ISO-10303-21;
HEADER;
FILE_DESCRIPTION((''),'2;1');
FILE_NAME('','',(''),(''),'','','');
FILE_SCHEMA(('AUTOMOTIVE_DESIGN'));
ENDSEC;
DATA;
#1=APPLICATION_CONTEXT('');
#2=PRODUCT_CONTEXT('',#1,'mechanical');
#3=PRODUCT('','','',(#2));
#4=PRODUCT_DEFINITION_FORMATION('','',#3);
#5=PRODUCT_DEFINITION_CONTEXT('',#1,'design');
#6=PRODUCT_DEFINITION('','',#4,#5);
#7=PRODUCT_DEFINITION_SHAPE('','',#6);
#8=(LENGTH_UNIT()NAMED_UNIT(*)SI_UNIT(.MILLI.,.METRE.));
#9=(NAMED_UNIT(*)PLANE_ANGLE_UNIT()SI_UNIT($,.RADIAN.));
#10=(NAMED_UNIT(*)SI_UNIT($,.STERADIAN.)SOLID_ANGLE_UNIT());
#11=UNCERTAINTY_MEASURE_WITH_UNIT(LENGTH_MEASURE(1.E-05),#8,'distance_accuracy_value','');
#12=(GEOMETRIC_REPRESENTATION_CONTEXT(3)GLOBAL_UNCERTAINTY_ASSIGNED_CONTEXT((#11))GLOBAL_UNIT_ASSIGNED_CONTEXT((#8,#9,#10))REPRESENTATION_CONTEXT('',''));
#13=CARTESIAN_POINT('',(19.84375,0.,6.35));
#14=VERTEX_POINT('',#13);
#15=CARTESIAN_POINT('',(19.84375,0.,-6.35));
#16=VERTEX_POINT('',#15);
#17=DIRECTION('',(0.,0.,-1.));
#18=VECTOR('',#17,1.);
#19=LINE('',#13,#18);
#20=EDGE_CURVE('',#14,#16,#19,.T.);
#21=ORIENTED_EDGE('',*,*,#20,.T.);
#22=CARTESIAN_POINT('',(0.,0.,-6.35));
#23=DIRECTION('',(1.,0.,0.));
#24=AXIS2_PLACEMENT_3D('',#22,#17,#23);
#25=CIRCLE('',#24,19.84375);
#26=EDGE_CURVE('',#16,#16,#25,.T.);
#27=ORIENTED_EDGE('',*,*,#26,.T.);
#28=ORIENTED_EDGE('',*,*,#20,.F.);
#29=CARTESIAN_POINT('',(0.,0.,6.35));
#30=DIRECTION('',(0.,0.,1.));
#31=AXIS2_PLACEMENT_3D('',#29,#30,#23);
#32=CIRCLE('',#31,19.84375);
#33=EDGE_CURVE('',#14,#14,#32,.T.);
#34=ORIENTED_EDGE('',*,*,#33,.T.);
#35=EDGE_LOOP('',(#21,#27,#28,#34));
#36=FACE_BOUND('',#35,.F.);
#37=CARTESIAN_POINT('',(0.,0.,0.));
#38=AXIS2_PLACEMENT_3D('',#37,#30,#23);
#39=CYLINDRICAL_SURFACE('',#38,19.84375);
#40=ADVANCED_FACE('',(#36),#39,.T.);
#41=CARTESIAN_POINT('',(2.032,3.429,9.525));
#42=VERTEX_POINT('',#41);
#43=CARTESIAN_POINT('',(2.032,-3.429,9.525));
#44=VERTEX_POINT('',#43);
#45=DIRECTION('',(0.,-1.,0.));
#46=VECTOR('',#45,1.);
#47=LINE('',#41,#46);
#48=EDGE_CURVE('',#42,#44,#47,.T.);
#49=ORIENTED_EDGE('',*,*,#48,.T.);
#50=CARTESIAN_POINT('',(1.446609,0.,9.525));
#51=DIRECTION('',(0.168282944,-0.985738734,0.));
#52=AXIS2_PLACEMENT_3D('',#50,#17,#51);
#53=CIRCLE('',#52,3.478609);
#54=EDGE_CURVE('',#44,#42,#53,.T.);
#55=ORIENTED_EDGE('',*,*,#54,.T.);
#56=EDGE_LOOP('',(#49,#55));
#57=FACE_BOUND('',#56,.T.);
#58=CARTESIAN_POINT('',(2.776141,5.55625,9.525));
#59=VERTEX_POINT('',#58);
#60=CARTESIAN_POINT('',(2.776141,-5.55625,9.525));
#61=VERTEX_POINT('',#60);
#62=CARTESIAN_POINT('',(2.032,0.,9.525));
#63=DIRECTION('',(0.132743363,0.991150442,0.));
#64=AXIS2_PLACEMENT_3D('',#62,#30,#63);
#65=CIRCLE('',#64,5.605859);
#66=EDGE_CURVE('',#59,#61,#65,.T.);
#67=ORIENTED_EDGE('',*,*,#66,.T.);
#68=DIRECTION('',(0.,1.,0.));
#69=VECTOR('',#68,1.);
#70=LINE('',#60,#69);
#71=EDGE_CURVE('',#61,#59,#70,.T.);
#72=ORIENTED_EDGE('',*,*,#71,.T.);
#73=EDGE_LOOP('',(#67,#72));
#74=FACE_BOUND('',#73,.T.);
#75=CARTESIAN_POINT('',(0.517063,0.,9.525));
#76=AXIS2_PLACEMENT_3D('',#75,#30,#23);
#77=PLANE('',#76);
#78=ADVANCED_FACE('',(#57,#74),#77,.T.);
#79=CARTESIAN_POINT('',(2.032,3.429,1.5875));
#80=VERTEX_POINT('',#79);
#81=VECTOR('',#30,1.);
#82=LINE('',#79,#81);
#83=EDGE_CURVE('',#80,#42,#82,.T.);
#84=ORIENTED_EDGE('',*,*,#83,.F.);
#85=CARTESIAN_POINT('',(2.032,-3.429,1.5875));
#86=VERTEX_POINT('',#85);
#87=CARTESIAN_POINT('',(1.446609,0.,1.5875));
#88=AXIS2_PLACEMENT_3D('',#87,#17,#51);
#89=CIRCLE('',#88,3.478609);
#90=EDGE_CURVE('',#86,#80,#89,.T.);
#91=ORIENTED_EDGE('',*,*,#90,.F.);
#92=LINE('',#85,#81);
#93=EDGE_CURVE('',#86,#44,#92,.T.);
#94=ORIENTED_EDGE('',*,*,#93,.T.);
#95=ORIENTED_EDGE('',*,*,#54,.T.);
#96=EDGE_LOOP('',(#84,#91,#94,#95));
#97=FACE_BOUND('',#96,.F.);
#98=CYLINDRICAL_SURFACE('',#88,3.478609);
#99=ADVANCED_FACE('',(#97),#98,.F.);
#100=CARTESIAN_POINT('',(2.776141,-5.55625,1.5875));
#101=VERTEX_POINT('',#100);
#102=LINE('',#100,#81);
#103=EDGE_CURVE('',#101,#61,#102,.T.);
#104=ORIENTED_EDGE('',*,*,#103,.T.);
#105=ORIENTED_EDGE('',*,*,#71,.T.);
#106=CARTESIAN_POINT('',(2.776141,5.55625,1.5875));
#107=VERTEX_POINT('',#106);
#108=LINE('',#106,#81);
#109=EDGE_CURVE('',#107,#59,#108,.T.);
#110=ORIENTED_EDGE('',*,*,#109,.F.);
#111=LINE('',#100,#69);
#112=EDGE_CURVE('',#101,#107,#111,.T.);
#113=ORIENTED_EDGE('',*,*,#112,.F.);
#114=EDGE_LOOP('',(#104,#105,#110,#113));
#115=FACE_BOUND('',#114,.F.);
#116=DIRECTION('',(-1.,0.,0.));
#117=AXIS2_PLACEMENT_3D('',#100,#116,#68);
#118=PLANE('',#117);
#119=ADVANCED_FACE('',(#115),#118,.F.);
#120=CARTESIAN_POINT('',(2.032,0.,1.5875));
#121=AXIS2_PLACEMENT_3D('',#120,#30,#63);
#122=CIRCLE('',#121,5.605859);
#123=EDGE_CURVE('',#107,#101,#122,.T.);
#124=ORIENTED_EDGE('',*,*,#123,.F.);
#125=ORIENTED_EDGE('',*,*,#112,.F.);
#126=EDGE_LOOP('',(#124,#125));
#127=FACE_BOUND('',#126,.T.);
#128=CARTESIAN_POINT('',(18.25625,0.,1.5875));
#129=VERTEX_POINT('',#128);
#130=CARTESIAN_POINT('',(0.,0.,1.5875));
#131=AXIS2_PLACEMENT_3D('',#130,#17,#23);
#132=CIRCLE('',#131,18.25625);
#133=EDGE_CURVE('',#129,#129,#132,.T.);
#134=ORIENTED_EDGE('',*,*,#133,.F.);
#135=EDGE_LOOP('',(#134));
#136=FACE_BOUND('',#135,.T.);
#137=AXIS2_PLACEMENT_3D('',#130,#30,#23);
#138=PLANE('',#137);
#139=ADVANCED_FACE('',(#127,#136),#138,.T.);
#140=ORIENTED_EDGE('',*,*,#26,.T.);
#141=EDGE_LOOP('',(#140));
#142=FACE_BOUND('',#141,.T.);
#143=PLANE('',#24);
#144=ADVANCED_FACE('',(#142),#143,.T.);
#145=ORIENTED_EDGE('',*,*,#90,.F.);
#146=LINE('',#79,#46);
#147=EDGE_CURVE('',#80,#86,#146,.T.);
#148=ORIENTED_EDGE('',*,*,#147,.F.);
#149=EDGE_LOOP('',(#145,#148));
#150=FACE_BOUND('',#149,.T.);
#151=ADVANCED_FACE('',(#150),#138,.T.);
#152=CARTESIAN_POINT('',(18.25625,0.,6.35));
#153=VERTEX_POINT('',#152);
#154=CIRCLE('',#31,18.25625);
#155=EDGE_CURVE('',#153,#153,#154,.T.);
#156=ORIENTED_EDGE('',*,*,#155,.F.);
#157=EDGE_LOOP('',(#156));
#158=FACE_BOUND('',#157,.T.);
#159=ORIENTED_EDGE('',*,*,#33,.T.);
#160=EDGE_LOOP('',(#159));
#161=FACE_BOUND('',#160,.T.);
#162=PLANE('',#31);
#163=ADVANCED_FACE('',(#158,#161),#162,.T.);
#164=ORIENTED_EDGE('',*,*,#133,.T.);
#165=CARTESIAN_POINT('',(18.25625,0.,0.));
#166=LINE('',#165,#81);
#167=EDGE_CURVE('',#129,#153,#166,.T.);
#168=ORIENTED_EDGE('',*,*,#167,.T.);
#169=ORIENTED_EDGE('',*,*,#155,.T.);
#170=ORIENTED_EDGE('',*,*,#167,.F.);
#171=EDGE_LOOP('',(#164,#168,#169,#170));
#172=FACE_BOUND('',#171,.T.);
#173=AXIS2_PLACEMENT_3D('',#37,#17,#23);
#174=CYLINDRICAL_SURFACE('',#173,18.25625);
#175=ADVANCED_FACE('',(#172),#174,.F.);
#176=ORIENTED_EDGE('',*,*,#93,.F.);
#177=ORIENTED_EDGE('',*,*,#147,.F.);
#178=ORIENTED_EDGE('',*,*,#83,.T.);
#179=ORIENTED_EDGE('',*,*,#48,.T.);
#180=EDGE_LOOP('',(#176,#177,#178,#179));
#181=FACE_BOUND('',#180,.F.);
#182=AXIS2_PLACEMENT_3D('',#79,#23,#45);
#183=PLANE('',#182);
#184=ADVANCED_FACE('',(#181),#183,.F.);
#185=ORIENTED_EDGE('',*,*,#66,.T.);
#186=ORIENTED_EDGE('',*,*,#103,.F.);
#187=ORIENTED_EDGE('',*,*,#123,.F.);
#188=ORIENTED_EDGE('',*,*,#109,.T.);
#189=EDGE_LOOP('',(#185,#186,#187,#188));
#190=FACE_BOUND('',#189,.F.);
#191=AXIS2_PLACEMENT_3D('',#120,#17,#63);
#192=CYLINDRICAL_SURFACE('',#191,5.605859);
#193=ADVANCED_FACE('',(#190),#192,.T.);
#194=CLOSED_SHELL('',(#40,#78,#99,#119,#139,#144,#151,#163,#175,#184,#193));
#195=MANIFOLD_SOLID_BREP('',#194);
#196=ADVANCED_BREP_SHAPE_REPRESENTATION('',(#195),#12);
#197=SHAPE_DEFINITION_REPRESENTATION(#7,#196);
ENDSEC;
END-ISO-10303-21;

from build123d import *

# Parameters (mm, degrees)
F0_R     = 19.84375
F1_DEPTH = 6.35
F2_T     = -1.5875
F4_DEPTH = 7.9375
F6_R     = 19.84375
F7_DEPTH = 6.35


with BuildPart() as f1:
    # F0 (on Top) → F1 (new body)
    with BuildSketch(Plane.XY):
        Circle(F0_R)
    extrude(amount=F1_DEPTH)

    # F2
    f2_openings = [f1.faces().sort_by_distance(p)[0] for p in [
        (0, 0, 6.35),
    ]]
    offset(amount=F2_T, openings=f2_openings)

    # F3 (on face) → F4 (join)
    with BuildSketch(Plane.XY.offset(1.5875)):
        with BuildLine():
            Line((2.776140625, -5.55625), (2.776140625, 5.55625))
            ThreePointArc((2.776140625, 5.55625), (-3.573859375, 0), (2.776140625, -5.55625))
        make_face()
        with BuildLine():
            Line((2.032, 3.429), (2.032, -3.429))
            ThreePointArc((2.032, -3.429), (-2.032, 0), (2.032, 3.429))
        make_face(mode=Mode.SUBTRACT)
    extrude(amount=F4_DEPTH)

    # F6 (on face) → F7 (join)
    with BuildSketch(Plane(origin=(0, 0, 0), x_dir=(1, 0, 0), z_dir=(0, 0, -1))):
        Circle(F6_R)
    extrude(amount=F7_DEPTH)


solid = f1.part
